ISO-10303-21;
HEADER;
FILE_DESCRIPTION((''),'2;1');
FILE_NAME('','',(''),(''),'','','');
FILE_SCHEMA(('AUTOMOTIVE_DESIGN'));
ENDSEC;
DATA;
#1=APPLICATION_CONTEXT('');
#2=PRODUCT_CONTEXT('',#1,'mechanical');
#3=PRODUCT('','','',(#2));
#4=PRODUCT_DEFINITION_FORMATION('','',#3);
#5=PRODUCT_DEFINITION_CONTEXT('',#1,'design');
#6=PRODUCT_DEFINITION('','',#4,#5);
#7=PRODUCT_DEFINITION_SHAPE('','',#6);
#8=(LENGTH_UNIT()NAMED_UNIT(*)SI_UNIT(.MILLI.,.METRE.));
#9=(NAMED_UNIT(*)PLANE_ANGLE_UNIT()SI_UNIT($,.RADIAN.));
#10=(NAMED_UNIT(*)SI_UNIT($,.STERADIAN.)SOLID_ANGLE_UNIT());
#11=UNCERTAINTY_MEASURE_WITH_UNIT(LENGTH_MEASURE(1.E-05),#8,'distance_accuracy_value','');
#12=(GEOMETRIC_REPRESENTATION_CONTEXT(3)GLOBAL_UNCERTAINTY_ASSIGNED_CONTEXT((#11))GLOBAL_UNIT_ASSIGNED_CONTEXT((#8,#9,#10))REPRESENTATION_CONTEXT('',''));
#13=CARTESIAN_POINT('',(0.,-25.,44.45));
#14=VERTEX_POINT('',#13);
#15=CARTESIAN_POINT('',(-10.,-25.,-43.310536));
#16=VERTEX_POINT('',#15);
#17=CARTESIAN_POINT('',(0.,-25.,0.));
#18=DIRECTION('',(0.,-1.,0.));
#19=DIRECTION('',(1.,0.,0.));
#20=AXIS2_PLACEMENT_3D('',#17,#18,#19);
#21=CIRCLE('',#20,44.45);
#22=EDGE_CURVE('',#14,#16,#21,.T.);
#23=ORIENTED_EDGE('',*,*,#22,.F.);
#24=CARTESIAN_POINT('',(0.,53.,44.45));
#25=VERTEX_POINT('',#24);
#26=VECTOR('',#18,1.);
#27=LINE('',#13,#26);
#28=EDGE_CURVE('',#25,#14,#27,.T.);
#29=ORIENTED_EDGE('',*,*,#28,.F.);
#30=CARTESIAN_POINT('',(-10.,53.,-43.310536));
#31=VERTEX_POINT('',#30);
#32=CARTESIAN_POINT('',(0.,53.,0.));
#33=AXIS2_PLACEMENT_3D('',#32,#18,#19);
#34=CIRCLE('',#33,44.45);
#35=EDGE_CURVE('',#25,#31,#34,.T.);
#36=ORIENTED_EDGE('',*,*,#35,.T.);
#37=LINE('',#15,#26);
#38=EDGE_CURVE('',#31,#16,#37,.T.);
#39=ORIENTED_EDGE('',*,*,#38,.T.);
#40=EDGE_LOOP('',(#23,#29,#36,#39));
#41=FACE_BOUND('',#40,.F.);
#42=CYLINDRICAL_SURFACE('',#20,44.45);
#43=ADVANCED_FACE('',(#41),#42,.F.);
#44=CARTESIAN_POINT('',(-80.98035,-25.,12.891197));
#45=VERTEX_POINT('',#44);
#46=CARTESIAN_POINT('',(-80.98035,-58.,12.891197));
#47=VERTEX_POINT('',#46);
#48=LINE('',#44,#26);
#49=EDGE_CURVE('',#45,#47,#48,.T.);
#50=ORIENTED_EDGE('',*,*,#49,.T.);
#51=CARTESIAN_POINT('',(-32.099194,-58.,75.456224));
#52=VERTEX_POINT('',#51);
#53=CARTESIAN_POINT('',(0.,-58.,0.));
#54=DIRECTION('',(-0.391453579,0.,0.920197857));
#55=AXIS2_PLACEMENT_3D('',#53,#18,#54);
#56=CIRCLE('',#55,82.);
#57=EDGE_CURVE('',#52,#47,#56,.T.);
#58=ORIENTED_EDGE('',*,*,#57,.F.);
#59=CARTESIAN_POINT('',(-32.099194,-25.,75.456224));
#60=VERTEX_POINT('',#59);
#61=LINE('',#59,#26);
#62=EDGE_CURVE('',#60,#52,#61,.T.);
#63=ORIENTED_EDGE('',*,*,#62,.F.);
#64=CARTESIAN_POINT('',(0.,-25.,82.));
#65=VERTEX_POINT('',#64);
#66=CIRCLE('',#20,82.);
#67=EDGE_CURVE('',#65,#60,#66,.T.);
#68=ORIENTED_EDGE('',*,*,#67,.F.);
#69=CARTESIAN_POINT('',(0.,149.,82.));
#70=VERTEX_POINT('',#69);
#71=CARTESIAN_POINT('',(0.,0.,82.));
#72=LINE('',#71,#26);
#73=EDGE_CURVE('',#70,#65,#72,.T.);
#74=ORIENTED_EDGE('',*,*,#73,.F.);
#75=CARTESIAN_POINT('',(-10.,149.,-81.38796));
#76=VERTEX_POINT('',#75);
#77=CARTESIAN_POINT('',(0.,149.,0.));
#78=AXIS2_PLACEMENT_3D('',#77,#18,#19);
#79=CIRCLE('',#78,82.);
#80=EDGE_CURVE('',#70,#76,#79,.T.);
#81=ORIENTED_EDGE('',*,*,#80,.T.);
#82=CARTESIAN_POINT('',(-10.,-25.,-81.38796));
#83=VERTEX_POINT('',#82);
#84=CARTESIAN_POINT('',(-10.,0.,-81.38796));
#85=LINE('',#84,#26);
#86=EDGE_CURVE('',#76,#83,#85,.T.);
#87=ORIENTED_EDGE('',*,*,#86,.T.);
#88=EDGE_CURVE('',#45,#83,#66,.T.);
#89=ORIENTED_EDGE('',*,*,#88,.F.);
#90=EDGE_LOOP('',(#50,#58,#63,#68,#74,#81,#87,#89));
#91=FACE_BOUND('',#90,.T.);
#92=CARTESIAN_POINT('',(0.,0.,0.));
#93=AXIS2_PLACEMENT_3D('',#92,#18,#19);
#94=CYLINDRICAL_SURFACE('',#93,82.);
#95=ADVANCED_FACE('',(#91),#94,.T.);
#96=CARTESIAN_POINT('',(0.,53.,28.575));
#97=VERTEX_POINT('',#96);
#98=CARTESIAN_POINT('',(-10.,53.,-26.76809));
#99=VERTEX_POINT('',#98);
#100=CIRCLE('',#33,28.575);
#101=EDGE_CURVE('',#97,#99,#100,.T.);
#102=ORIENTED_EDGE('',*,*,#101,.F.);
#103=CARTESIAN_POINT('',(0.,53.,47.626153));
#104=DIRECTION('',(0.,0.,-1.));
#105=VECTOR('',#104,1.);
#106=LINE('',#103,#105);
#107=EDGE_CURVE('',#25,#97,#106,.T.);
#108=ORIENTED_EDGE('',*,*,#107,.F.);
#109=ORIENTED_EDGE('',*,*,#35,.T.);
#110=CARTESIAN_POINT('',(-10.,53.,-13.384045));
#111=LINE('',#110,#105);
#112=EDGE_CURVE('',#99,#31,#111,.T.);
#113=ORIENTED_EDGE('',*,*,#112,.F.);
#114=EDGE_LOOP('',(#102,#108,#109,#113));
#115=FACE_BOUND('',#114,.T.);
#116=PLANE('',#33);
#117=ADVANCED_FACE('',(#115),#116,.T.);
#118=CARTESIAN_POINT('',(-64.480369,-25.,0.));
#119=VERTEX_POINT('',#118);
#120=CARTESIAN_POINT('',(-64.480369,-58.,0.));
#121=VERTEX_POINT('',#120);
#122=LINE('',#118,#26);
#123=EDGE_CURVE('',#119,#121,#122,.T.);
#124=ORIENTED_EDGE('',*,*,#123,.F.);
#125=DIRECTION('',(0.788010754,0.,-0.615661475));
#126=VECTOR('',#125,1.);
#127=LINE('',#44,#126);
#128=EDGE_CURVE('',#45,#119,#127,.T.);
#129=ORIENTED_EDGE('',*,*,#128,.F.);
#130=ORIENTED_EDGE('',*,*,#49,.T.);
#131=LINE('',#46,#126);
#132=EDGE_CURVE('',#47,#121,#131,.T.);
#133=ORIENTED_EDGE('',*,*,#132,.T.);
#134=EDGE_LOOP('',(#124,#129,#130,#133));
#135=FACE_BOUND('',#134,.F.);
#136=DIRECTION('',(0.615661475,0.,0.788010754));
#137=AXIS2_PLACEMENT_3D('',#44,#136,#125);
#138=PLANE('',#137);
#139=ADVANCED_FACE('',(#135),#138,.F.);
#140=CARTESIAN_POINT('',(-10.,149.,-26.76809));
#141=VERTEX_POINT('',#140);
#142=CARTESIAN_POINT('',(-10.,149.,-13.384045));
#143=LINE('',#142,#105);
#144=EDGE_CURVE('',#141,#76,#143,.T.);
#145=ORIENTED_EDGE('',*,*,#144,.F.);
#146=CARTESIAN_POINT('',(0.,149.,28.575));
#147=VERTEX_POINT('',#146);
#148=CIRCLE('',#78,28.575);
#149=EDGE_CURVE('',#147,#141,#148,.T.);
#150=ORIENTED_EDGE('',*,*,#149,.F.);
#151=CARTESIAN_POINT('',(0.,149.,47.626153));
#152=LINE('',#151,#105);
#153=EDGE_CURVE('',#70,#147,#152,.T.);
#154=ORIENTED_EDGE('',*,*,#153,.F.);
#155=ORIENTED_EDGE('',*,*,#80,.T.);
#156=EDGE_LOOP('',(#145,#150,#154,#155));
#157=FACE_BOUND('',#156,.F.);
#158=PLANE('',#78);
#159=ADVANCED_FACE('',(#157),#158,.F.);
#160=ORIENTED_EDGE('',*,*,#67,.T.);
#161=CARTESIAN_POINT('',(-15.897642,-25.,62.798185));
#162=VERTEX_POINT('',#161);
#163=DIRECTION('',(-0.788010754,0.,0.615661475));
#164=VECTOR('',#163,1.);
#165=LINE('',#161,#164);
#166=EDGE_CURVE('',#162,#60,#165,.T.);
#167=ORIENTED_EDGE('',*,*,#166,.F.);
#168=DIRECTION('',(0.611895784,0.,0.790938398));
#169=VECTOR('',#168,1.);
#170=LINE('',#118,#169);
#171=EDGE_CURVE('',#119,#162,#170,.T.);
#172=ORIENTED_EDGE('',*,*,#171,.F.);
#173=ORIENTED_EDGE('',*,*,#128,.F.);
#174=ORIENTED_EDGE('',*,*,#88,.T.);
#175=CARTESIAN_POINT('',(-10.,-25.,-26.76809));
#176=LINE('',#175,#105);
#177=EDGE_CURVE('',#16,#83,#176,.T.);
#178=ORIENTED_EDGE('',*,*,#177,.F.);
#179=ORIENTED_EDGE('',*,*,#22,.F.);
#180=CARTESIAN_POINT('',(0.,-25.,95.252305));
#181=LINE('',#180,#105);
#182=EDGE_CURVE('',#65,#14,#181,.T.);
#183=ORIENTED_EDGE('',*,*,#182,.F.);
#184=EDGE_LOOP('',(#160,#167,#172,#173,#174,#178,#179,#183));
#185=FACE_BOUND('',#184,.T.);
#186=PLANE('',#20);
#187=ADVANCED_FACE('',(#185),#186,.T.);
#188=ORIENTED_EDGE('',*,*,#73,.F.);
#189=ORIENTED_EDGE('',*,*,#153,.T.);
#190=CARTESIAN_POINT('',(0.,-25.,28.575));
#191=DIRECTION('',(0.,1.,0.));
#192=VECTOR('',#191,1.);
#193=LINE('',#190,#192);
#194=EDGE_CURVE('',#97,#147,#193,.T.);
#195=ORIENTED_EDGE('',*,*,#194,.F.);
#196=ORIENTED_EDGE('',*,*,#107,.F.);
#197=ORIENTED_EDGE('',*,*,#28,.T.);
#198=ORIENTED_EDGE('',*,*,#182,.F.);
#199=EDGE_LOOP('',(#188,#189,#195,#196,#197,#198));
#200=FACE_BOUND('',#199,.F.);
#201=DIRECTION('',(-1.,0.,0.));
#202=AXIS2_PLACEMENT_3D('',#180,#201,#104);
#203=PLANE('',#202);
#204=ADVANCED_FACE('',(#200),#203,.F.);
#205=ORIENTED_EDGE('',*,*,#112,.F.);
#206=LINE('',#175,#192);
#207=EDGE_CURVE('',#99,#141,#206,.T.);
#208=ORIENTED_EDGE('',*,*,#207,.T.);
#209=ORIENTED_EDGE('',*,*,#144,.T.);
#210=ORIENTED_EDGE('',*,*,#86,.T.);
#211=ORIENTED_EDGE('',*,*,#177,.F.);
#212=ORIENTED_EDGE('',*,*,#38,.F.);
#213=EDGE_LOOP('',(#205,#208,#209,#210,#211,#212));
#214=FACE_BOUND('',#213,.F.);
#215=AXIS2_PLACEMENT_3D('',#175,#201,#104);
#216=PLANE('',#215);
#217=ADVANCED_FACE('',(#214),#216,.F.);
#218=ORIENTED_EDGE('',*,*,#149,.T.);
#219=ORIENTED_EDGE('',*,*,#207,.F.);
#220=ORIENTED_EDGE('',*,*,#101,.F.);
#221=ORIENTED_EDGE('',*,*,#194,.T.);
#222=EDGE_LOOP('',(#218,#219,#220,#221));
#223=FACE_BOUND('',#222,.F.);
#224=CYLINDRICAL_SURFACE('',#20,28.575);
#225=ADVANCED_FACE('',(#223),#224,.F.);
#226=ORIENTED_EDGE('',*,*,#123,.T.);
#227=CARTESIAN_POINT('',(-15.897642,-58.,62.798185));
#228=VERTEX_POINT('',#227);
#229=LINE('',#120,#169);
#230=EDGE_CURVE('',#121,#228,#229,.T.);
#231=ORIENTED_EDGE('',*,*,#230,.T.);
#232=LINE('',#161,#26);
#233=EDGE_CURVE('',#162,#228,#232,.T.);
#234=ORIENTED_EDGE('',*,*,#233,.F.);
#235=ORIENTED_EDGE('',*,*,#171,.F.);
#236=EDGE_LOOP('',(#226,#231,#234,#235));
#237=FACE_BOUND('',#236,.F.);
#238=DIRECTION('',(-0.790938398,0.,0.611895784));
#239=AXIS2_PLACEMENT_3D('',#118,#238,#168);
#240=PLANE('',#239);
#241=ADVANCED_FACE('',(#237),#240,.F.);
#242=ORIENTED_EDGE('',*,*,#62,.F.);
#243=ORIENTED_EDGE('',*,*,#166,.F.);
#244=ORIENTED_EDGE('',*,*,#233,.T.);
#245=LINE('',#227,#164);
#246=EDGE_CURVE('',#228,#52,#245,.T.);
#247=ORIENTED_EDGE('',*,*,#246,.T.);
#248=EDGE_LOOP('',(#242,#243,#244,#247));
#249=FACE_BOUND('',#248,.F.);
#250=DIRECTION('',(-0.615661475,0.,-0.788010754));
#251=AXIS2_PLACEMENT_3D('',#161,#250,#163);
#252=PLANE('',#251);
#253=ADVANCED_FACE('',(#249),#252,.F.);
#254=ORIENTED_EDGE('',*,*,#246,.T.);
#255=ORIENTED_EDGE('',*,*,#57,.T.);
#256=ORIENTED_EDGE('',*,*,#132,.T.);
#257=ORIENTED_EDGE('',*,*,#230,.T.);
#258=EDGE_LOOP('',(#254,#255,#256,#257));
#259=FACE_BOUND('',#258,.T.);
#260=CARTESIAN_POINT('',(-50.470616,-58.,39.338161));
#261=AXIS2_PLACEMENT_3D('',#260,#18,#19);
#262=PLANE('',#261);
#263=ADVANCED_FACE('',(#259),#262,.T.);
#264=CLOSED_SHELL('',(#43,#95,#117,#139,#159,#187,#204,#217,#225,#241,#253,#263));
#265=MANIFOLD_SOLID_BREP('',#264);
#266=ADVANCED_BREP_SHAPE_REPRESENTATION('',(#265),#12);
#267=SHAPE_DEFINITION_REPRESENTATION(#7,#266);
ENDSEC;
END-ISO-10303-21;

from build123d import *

# Parameters (mm, degrees)
F0_R          = 82
F1_DEPTH      = 25
F1_DEPTH_BACK = 149
F2_R          = 28.575
F3_DEPTH      = 174.001
F6_DEPTH      = 33
F7_R          = 44.45
F7_R_2        = 28.575
F8_DEPTH      = 78
F10_DEPTH     = 174.001


with BuildPart() as f1:
    # F0 (on Front) → F1 (new body, two sides)
    with BuildSketch(Plane.XZ) as f1_sk:
        Circle(F0_R)
    extrude(amount=F1_DEPTH)
    extrude(f1_sk.sketch, amount=-F1_DEPTH_BACK)

    # F2 (on face) → F3 (cut, through all)
    with BuildSketch(Plane.XZ.offset(25)):
        Circle(F2_R)
    extrude(amount=-F3_DEPTH, mode=Mode.SUBTRACT)

    # F4 (on face) → F6 (join)
    with BuildSketch(Plane.XZ.offset(25)):
        with BuildLine():
            ThreePointArc((-32.0991935027, 75.4562242395), (-64.6168817958, 50.4842409767), (-80.9803496399, 12.8911974698))
            Line((-80.9803496399, 12.8911974698), (-64.4803693095, 0))
            Line((-64.4803693095, 0), (-15.8976419198, 62.7981848607))
            Line((-15.8976419198, 62.7981848607), (-32.0991935027, 75.4562242395))
        make_face()
    extrude(amount=F6_DEPTH)

    # F7 (on face) → F8 (cut)
    with BuildSketch(Plane.XZ.offset(25)):
        Circle(F7_R)
        Circle(F7_R_2, mode=Mode.SUBTRACT)
    extrude(amount=-F8_DEPTH, mode=Mode.SUBTRACT)

    # F9 (on face) → F10 (cut, through all)
    with BuildSketch(Plane.XZ.offset(25)):
        with BuildLine():
            Line((91, 95.2523052692), (0, 95.2523052692))
            Line((0, 95.2523052692), (0, 82))
            ThreePointArc((0, 82), (57.9827560573, 57.9827560573), (82, 0))
            ThreePointArc((82, 0), (54.3323108288, -61.4166101311), (-10, -81.3879597975))
            Line((-10, -81.3879597975), (-10, -94.1154360771))
            Line((-10, -94.1154360771), (91, -94.1154360771))
            Line((91, -94.1154360771), (91, 95.2523052692))
        make_face()
        with BuildLine():
            ThreePointArc((82, 0), (57.9827560573, 57.9827560573), (0, 82))
            Line((0, 82), (0, 28.575))
            ThreePointArc((0, 28.575), (20.2055762724, 20.2055762724), (28.575, 0))
            ThreePointArc((28.575, 0), (16.2908045381, -23.4763777551), (-10, -26.7680896778))
            Line((-10, -26.7680896778), (-10, -81.3879597975))
            ThreePointArc((-10, -81.3879597975), (54.3323108288, -61.4166101311), (82, 0))
        make_face()
    extrude(amount=-F10_DEPTH, mode=Mode.SUBTRACT)


solid = f1.part
